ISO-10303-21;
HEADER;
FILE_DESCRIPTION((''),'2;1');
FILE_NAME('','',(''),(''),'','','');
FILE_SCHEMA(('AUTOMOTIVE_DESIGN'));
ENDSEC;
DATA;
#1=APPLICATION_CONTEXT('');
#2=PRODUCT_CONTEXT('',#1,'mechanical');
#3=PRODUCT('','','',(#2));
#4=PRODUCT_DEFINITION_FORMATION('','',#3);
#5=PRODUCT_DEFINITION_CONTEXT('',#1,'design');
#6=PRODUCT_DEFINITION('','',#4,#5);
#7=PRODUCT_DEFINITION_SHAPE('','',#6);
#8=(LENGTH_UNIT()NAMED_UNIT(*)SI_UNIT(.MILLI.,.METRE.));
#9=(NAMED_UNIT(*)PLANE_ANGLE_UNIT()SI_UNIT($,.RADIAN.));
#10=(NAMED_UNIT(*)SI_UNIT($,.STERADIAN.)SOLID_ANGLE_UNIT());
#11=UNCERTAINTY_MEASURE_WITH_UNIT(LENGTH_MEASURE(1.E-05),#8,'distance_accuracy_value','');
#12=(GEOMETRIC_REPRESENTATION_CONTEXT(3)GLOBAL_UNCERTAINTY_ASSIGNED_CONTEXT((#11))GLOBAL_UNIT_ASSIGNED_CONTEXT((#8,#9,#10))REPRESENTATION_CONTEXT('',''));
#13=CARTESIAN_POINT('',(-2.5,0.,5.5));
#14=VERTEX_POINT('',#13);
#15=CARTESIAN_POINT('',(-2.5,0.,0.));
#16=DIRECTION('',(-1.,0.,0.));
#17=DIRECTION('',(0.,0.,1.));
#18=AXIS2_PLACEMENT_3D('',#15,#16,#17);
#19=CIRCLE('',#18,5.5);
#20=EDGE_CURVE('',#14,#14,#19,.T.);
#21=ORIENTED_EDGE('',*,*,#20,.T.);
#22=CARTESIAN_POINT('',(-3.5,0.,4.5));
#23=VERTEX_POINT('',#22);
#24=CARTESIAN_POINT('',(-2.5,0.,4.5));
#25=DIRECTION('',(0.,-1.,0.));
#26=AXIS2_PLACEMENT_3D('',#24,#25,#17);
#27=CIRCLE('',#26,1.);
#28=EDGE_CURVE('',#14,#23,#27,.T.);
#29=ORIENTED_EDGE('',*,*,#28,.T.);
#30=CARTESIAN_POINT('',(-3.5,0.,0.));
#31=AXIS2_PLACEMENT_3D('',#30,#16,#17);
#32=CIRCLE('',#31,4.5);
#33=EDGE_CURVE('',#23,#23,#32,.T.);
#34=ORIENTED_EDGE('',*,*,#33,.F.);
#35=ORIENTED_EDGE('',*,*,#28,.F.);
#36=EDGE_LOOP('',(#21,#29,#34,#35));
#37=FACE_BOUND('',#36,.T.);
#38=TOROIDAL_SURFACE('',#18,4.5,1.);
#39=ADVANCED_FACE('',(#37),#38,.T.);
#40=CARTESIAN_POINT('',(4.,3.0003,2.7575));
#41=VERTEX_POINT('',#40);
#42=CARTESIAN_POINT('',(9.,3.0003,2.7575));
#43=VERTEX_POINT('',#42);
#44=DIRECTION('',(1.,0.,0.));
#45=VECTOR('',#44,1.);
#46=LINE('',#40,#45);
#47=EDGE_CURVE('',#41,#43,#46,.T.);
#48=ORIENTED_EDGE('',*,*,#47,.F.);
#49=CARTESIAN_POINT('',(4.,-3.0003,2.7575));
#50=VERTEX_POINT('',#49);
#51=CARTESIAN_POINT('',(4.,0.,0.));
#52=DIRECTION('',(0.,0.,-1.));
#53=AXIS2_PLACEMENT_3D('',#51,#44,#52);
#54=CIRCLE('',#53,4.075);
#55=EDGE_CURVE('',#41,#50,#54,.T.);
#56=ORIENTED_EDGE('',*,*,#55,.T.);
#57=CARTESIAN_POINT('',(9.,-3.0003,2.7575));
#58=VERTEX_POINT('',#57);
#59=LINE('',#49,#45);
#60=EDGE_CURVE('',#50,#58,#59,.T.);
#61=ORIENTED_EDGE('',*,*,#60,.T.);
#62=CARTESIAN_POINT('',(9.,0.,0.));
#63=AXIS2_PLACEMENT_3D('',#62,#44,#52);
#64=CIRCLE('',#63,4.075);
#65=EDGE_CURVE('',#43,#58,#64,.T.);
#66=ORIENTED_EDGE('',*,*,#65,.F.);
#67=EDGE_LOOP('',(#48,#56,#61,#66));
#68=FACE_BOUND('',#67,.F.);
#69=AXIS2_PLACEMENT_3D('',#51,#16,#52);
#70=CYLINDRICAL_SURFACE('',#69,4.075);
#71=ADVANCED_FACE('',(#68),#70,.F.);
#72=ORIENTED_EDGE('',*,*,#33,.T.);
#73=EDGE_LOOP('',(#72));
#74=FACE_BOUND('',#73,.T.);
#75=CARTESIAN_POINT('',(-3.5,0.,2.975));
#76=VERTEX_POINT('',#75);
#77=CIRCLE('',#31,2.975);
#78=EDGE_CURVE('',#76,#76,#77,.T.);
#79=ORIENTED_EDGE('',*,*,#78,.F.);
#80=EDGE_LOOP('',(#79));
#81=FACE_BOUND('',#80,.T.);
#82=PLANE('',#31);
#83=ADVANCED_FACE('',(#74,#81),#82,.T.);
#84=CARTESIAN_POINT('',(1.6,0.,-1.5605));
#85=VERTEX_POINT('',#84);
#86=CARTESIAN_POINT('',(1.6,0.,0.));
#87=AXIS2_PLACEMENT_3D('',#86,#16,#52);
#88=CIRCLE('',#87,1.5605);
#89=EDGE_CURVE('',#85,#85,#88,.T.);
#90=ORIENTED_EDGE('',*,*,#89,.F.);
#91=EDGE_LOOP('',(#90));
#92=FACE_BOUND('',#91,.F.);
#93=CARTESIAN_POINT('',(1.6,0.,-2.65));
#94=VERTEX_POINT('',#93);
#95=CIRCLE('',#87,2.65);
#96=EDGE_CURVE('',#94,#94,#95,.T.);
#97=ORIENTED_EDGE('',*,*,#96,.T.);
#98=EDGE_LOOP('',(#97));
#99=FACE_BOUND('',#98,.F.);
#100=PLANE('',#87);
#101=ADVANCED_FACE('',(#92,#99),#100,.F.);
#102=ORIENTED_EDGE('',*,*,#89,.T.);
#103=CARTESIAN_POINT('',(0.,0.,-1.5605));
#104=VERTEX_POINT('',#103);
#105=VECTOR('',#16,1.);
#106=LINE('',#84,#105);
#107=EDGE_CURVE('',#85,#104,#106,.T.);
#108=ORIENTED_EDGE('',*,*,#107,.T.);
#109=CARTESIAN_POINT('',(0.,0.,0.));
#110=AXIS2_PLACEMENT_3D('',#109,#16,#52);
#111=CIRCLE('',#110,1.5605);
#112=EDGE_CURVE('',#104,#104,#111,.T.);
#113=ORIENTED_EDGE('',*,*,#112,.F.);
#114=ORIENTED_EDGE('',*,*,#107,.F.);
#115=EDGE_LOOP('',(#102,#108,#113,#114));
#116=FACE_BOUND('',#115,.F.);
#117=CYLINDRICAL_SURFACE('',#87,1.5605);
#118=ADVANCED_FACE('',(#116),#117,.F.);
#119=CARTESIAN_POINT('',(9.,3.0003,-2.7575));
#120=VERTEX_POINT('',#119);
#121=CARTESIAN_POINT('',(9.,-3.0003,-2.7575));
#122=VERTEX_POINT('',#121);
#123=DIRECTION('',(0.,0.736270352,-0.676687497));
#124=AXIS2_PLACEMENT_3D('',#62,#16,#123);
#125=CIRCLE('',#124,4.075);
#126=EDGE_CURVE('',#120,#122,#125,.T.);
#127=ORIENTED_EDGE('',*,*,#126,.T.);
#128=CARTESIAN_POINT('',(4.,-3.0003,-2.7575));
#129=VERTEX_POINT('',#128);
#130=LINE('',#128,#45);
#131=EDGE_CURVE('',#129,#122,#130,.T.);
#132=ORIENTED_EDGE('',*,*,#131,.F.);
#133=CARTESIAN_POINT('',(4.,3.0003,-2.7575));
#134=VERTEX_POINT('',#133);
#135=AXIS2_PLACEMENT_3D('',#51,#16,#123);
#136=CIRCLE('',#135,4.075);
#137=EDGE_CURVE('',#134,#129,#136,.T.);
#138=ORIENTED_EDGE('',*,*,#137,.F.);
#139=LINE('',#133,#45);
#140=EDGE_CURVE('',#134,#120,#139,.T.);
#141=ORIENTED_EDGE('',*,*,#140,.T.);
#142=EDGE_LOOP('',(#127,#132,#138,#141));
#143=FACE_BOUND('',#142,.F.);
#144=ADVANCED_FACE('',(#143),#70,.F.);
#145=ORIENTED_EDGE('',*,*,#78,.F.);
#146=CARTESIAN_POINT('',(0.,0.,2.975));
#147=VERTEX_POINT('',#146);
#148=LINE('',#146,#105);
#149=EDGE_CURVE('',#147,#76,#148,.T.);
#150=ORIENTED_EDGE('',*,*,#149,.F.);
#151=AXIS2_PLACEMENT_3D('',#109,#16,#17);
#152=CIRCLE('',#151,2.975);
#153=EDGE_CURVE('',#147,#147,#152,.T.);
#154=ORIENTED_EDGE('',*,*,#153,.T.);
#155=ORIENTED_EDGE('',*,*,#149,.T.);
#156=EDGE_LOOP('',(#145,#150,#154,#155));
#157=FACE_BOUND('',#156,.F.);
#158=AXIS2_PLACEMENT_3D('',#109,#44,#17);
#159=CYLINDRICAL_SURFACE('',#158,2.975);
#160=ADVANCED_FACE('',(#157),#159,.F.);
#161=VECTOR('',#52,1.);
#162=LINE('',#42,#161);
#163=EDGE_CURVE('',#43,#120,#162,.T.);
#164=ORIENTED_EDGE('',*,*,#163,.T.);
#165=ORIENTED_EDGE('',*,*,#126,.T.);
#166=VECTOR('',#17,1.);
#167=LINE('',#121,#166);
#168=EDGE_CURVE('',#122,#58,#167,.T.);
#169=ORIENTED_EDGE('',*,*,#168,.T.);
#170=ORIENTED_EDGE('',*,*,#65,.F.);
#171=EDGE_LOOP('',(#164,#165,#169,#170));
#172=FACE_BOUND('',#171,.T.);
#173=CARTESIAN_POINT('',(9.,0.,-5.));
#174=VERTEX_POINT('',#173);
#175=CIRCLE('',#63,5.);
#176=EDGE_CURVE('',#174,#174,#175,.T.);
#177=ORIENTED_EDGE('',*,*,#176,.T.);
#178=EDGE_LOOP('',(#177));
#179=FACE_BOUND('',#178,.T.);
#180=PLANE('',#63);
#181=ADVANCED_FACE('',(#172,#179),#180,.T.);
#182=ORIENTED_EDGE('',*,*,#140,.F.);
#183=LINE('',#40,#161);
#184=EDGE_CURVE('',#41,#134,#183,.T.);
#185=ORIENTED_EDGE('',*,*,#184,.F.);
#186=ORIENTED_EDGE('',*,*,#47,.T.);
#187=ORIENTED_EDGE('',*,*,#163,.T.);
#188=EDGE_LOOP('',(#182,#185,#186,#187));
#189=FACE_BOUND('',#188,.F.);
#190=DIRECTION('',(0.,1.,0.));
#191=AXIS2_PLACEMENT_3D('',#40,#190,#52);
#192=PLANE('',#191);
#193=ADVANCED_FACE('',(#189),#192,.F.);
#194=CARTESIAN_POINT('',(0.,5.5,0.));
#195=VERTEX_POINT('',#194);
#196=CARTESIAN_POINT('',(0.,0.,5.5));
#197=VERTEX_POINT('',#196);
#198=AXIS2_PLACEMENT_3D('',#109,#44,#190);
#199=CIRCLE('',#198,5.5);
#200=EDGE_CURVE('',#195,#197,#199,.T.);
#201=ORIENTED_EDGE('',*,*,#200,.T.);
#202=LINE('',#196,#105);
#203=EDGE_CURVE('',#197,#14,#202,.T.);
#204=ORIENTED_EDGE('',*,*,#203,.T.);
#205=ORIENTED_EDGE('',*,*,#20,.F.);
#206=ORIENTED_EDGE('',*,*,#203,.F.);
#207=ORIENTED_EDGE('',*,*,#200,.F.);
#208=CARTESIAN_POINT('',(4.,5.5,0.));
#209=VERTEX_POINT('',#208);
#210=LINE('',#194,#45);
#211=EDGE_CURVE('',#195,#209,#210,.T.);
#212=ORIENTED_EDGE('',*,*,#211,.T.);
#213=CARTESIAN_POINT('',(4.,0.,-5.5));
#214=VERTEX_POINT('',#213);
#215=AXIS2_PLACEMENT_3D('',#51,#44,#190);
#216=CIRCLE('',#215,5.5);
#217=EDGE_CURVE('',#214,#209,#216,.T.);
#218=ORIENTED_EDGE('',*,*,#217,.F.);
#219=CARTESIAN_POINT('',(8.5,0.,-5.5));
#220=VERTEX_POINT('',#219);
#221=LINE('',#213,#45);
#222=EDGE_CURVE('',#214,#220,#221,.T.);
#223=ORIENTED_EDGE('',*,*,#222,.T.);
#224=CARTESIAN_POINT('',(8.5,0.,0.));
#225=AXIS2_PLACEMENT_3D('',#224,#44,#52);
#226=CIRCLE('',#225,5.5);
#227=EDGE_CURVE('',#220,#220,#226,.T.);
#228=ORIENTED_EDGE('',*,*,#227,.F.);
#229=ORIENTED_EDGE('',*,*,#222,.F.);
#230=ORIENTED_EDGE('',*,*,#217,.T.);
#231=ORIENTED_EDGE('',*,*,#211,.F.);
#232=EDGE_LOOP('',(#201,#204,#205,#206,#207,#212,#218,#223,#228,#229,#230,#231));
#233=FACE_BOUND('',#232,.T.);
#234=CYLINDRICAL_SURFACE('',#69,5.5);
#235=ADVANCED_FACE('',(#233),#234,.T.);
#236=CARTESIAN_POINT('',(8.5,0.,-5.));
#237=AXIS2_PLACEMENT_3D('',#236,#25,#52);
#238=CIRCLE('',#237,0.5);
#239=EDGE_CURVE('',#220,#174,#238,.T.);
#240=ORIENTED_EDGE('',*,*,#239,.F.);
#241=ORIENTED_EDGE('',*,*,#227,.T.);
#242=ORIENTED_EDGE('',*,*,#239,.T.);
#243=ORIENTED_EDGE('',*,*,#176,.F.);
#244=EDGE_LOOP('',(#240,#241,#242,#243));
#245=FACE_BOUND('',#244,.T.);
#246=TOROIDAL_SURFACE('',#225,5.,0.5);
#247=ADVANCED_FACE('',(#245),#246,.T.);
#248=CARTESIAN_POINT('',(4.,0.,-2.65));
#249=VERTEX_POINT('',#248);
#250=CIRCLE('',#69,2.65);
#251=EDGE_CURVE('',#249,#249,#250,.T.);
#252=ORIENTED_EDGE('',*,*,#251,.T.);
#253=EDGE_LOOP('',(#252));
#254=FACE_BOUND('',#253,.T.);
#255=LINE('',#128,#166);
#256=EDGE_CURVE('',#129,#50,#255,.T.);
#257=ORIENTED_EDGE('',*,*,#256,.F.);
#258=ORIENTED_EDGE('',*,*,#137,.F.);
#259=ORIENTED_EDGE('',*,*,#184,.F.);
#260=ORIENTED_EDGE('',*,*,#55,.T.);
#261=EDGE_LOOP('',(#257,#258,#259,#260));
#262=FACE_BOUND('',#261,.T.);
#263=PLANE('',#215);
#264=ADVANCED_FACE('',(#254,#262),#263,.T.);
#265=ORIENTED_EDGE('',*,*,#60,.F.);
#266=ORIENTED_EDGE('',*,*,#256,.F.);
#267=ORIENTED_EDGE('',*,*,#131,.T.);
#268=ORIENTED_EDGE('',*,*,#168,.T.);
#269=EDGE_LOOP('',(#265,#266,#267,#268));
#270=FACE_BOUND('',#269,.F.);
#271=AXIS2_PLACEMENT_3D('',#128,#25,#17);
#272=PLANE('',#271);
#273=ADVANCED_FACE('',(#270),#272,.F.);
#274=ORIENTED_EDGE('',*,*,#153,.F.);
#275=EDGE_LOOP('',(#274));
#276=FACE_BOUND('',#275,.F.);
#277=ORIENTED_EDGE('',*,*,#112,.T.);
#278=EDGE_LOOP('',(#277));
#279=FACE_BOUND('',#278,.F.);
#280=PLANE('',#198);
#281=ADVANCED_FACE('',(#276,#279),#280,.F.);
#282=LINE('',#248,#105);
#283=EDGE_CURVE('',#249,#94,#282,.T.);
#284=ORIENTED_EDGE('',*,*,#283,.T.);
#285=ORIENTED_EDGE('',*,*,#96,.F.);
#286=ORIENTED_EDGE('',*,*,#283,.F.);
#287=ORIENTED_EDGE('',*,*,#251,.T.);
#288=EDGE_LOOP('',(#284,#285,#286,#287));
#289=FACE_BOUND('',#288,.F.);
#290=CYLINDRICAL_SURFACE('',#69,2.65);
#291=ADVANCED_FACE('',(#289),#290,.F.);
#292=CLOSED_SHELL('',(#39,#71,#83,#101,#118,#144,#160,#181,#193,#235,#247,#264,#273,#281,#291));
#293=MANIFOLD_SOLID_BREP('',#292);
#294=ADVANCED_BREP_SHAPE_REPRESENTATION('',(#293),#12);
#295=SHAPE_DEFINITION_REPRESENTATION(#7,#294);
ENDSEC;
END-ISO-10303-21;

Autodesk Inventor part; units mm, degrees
ref_plane "YZ Plane" through (0, 0, 0) normal (1, 0, 0) x (0, 1, 0)
ref_plane "XZ Plane" through (0, 0, 0) normal (0, 1, 0) x (-1, 0, 0)
ref_plane "XY Plane" through (0, 0, 0) normal (0, 0, 1) x (1, 0, 0)
sketch "Sketch5" plane through (0, 0, 0) normal (1, 0, 0) x (0, 1, 0)
  circle A0 centre (0, 0) radius 5.5
  dimension "d11" = 11
extrude "Extrusion5" add sketch "Sketch5" along normal blind 4
sketch "Sketch7" plane through (4, 0, 0) normal (1, 0, 0) x (0, 0, -1)
  circle A0 centre (0, 0) radius 5.5 projected
hole "Hole1" at (4, 0, 0) direction (-1, 0, 0) diameter 3.121 end through all counterbore diameter 5.3 counterbore depth 2.4
sketch "Sketch10" plane through (4, 0, 0) normal (1, 0, 0) x (0, 0, -1)
  line L0 (-2.7575, 3.0003) -> (2.7575, 3.0003)
  line L1 (2.7575, -3.0003) -> (-2.7575, -3.0003)
  line L2 (-2.7575, 3.0003) -> (2.7575, -3.0003) construction
  line L3 (2.7575, 3.0003) -> (-2.7575, -3.0003) construction
  arc A0 (2.7575, 3.0003) -> (-2.7575, 3.0003) centre (0, 0) ccw
  arc A1 (-2.7575, -3.0003) -> (2.7575, -3.0003) centre (0, 0) ccw
extrude "Extrusion8" add sketch "Sketch10" along normal blind 5
sketch "Sketch11" plane through (4, 0, 0) normal (1, 0, 0) x (0, 0, -1)
  circle A0 centre (0, 0) radius 1.5605 projected
  circle A1 centre (0, 0) radius 4.075
  circle A2 centre (0, 0) radius 5.5 projected
sketch "Sketch12" plane through (0, 0, 0) normal (-1, 0, 0) x (0, 0, 1)
  circle A0 centre (0, 0) radius 2.975
  circle A1 centre (0, 0) radius 5.5 projected
  dimension "d35" = 5.95
extrude "Extrusion10" add sketch "Sketch12" along normal blind 3.5
extrude "Extrusion11" add sketch "Sketch11" along normal blind 5 contours A2
fillet "Fillet4" radius 1 1 edges at (-3.5, 0, -5.5)
fillet "Fillet4" radius 0.5 1 edges at (9, 0, 5.5)
properties part number "servo_adapter"
